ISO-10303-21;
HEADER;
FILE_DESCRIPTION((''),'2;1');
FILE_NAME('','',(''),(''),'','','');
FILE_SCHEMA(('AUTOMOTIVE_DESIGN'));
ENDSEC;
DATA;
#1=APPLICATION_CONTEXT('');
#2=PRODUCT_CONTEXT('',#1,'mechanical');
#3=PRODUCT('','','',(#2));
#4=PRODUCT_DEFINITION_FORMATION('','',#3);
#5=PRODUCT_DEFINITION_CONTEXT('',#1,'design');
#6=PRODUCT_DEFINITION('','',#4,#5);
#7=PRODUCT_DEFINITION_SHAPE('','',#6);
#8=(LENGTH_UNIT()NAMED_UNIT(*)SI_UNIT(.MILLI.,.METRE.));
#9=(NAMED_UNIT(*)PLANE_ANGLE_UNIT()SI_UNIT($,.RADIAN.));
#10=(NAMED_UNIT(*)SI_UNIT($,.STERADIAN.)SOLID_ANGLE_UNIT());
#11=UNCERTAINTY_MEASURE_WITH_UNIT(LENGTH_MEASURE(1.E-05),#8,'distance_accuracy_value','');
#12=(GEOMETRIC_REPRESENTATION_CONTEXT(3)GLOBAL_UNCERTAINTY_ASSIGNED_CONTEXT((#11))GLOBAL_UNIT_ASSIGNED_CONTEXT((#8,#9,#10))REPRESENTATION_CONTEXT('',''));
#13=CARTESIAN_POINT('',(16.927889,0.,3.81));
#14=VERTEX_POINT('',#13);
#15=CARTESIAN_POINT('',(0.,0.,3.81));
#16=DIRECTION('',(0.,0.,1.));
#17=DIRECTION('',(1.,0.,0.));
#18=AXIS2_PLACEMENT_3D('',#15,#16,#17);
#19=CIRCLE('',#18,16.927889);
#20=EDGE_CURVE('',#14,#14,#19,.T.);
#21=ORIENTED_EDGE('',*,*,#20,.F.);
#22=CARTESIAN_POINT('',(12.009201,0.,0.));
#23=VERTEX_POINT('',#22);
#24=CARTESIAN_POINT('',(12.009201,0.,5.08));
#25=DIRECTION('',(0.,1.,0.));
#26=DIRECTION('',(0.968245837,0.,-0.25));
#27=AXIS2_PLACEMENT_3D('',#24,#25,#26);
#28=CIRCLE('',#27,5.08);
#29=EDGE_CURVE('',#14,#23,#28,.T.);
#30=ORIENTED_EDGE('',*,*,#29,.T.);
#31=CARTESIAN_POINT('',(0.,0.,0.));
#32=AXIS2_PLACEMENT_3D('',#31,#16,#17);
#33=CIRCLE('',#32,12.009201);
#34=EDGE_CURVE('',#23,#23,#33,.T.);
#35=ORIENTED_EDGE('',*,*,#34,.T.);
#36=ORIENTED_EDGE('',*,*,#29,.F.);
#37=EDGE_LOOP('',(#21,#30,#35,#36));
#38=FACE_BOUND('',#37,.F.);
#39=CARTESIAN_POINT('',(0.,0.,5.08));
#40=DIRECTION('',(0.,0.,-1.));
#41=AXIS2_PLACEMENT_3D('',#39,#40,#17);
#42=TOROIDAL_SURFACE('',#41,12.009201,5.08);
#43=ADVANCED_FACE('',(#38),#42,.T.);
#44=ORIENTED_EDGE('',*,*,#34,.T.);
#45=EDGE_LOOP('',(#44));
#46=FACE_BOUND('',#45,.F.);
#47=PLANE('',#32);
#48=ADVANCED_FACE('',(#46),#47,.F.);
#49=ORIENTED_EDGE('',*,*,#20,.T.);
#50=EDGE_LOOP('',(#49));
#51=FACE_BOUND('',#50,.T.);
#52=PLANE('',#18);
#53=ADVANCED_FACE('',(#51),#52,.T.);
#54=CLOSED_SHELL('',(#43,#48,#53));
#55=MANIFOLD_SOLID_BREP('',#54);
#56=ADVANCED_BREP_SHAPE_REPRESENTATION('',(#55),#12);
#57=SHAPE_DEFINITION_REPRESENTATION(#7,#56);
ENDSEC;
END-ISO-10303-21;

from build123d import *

# Parameters (mm, degrees)
F0_R     = 16.9278894976
F1_DEPTH = 3.81


# Not quite as in the source:
# - a fillet or chamfer that OpenCascade refuses, or shapes differently, is made with other operations: its cross-section is extruded or revolved along the edge and cut away or added


with BuildPart() as f1:
    # F0 (on Top) → F1 (new body)
    with BuildSketch(Plane.XY):
        Circle(F0_R)
    extrude(amount=F1_DEPTH)

    # F2: fillet of radius 5.08 on 1 edges, made by hand

    # F2_s1 → F2_t2 (revolve, cut)
    with BuildSketch(Plane.XZ):
        with BuildLine():
            ThreePointArc((16.9278894976, 3.81), (15.1200526212, 1.0639073716), (12.0092006479, 0))
            Line((12.0092006479, 0), (16.9278894976, 0))
            Line((16.9278894976, 0), (16.9278894976, 3.81))
        make_face()
    revolve(axis=Axis((0, 0, 0), (0, 0, 1)), mode=Mode.SUBTRACT)


solid = f1.part
